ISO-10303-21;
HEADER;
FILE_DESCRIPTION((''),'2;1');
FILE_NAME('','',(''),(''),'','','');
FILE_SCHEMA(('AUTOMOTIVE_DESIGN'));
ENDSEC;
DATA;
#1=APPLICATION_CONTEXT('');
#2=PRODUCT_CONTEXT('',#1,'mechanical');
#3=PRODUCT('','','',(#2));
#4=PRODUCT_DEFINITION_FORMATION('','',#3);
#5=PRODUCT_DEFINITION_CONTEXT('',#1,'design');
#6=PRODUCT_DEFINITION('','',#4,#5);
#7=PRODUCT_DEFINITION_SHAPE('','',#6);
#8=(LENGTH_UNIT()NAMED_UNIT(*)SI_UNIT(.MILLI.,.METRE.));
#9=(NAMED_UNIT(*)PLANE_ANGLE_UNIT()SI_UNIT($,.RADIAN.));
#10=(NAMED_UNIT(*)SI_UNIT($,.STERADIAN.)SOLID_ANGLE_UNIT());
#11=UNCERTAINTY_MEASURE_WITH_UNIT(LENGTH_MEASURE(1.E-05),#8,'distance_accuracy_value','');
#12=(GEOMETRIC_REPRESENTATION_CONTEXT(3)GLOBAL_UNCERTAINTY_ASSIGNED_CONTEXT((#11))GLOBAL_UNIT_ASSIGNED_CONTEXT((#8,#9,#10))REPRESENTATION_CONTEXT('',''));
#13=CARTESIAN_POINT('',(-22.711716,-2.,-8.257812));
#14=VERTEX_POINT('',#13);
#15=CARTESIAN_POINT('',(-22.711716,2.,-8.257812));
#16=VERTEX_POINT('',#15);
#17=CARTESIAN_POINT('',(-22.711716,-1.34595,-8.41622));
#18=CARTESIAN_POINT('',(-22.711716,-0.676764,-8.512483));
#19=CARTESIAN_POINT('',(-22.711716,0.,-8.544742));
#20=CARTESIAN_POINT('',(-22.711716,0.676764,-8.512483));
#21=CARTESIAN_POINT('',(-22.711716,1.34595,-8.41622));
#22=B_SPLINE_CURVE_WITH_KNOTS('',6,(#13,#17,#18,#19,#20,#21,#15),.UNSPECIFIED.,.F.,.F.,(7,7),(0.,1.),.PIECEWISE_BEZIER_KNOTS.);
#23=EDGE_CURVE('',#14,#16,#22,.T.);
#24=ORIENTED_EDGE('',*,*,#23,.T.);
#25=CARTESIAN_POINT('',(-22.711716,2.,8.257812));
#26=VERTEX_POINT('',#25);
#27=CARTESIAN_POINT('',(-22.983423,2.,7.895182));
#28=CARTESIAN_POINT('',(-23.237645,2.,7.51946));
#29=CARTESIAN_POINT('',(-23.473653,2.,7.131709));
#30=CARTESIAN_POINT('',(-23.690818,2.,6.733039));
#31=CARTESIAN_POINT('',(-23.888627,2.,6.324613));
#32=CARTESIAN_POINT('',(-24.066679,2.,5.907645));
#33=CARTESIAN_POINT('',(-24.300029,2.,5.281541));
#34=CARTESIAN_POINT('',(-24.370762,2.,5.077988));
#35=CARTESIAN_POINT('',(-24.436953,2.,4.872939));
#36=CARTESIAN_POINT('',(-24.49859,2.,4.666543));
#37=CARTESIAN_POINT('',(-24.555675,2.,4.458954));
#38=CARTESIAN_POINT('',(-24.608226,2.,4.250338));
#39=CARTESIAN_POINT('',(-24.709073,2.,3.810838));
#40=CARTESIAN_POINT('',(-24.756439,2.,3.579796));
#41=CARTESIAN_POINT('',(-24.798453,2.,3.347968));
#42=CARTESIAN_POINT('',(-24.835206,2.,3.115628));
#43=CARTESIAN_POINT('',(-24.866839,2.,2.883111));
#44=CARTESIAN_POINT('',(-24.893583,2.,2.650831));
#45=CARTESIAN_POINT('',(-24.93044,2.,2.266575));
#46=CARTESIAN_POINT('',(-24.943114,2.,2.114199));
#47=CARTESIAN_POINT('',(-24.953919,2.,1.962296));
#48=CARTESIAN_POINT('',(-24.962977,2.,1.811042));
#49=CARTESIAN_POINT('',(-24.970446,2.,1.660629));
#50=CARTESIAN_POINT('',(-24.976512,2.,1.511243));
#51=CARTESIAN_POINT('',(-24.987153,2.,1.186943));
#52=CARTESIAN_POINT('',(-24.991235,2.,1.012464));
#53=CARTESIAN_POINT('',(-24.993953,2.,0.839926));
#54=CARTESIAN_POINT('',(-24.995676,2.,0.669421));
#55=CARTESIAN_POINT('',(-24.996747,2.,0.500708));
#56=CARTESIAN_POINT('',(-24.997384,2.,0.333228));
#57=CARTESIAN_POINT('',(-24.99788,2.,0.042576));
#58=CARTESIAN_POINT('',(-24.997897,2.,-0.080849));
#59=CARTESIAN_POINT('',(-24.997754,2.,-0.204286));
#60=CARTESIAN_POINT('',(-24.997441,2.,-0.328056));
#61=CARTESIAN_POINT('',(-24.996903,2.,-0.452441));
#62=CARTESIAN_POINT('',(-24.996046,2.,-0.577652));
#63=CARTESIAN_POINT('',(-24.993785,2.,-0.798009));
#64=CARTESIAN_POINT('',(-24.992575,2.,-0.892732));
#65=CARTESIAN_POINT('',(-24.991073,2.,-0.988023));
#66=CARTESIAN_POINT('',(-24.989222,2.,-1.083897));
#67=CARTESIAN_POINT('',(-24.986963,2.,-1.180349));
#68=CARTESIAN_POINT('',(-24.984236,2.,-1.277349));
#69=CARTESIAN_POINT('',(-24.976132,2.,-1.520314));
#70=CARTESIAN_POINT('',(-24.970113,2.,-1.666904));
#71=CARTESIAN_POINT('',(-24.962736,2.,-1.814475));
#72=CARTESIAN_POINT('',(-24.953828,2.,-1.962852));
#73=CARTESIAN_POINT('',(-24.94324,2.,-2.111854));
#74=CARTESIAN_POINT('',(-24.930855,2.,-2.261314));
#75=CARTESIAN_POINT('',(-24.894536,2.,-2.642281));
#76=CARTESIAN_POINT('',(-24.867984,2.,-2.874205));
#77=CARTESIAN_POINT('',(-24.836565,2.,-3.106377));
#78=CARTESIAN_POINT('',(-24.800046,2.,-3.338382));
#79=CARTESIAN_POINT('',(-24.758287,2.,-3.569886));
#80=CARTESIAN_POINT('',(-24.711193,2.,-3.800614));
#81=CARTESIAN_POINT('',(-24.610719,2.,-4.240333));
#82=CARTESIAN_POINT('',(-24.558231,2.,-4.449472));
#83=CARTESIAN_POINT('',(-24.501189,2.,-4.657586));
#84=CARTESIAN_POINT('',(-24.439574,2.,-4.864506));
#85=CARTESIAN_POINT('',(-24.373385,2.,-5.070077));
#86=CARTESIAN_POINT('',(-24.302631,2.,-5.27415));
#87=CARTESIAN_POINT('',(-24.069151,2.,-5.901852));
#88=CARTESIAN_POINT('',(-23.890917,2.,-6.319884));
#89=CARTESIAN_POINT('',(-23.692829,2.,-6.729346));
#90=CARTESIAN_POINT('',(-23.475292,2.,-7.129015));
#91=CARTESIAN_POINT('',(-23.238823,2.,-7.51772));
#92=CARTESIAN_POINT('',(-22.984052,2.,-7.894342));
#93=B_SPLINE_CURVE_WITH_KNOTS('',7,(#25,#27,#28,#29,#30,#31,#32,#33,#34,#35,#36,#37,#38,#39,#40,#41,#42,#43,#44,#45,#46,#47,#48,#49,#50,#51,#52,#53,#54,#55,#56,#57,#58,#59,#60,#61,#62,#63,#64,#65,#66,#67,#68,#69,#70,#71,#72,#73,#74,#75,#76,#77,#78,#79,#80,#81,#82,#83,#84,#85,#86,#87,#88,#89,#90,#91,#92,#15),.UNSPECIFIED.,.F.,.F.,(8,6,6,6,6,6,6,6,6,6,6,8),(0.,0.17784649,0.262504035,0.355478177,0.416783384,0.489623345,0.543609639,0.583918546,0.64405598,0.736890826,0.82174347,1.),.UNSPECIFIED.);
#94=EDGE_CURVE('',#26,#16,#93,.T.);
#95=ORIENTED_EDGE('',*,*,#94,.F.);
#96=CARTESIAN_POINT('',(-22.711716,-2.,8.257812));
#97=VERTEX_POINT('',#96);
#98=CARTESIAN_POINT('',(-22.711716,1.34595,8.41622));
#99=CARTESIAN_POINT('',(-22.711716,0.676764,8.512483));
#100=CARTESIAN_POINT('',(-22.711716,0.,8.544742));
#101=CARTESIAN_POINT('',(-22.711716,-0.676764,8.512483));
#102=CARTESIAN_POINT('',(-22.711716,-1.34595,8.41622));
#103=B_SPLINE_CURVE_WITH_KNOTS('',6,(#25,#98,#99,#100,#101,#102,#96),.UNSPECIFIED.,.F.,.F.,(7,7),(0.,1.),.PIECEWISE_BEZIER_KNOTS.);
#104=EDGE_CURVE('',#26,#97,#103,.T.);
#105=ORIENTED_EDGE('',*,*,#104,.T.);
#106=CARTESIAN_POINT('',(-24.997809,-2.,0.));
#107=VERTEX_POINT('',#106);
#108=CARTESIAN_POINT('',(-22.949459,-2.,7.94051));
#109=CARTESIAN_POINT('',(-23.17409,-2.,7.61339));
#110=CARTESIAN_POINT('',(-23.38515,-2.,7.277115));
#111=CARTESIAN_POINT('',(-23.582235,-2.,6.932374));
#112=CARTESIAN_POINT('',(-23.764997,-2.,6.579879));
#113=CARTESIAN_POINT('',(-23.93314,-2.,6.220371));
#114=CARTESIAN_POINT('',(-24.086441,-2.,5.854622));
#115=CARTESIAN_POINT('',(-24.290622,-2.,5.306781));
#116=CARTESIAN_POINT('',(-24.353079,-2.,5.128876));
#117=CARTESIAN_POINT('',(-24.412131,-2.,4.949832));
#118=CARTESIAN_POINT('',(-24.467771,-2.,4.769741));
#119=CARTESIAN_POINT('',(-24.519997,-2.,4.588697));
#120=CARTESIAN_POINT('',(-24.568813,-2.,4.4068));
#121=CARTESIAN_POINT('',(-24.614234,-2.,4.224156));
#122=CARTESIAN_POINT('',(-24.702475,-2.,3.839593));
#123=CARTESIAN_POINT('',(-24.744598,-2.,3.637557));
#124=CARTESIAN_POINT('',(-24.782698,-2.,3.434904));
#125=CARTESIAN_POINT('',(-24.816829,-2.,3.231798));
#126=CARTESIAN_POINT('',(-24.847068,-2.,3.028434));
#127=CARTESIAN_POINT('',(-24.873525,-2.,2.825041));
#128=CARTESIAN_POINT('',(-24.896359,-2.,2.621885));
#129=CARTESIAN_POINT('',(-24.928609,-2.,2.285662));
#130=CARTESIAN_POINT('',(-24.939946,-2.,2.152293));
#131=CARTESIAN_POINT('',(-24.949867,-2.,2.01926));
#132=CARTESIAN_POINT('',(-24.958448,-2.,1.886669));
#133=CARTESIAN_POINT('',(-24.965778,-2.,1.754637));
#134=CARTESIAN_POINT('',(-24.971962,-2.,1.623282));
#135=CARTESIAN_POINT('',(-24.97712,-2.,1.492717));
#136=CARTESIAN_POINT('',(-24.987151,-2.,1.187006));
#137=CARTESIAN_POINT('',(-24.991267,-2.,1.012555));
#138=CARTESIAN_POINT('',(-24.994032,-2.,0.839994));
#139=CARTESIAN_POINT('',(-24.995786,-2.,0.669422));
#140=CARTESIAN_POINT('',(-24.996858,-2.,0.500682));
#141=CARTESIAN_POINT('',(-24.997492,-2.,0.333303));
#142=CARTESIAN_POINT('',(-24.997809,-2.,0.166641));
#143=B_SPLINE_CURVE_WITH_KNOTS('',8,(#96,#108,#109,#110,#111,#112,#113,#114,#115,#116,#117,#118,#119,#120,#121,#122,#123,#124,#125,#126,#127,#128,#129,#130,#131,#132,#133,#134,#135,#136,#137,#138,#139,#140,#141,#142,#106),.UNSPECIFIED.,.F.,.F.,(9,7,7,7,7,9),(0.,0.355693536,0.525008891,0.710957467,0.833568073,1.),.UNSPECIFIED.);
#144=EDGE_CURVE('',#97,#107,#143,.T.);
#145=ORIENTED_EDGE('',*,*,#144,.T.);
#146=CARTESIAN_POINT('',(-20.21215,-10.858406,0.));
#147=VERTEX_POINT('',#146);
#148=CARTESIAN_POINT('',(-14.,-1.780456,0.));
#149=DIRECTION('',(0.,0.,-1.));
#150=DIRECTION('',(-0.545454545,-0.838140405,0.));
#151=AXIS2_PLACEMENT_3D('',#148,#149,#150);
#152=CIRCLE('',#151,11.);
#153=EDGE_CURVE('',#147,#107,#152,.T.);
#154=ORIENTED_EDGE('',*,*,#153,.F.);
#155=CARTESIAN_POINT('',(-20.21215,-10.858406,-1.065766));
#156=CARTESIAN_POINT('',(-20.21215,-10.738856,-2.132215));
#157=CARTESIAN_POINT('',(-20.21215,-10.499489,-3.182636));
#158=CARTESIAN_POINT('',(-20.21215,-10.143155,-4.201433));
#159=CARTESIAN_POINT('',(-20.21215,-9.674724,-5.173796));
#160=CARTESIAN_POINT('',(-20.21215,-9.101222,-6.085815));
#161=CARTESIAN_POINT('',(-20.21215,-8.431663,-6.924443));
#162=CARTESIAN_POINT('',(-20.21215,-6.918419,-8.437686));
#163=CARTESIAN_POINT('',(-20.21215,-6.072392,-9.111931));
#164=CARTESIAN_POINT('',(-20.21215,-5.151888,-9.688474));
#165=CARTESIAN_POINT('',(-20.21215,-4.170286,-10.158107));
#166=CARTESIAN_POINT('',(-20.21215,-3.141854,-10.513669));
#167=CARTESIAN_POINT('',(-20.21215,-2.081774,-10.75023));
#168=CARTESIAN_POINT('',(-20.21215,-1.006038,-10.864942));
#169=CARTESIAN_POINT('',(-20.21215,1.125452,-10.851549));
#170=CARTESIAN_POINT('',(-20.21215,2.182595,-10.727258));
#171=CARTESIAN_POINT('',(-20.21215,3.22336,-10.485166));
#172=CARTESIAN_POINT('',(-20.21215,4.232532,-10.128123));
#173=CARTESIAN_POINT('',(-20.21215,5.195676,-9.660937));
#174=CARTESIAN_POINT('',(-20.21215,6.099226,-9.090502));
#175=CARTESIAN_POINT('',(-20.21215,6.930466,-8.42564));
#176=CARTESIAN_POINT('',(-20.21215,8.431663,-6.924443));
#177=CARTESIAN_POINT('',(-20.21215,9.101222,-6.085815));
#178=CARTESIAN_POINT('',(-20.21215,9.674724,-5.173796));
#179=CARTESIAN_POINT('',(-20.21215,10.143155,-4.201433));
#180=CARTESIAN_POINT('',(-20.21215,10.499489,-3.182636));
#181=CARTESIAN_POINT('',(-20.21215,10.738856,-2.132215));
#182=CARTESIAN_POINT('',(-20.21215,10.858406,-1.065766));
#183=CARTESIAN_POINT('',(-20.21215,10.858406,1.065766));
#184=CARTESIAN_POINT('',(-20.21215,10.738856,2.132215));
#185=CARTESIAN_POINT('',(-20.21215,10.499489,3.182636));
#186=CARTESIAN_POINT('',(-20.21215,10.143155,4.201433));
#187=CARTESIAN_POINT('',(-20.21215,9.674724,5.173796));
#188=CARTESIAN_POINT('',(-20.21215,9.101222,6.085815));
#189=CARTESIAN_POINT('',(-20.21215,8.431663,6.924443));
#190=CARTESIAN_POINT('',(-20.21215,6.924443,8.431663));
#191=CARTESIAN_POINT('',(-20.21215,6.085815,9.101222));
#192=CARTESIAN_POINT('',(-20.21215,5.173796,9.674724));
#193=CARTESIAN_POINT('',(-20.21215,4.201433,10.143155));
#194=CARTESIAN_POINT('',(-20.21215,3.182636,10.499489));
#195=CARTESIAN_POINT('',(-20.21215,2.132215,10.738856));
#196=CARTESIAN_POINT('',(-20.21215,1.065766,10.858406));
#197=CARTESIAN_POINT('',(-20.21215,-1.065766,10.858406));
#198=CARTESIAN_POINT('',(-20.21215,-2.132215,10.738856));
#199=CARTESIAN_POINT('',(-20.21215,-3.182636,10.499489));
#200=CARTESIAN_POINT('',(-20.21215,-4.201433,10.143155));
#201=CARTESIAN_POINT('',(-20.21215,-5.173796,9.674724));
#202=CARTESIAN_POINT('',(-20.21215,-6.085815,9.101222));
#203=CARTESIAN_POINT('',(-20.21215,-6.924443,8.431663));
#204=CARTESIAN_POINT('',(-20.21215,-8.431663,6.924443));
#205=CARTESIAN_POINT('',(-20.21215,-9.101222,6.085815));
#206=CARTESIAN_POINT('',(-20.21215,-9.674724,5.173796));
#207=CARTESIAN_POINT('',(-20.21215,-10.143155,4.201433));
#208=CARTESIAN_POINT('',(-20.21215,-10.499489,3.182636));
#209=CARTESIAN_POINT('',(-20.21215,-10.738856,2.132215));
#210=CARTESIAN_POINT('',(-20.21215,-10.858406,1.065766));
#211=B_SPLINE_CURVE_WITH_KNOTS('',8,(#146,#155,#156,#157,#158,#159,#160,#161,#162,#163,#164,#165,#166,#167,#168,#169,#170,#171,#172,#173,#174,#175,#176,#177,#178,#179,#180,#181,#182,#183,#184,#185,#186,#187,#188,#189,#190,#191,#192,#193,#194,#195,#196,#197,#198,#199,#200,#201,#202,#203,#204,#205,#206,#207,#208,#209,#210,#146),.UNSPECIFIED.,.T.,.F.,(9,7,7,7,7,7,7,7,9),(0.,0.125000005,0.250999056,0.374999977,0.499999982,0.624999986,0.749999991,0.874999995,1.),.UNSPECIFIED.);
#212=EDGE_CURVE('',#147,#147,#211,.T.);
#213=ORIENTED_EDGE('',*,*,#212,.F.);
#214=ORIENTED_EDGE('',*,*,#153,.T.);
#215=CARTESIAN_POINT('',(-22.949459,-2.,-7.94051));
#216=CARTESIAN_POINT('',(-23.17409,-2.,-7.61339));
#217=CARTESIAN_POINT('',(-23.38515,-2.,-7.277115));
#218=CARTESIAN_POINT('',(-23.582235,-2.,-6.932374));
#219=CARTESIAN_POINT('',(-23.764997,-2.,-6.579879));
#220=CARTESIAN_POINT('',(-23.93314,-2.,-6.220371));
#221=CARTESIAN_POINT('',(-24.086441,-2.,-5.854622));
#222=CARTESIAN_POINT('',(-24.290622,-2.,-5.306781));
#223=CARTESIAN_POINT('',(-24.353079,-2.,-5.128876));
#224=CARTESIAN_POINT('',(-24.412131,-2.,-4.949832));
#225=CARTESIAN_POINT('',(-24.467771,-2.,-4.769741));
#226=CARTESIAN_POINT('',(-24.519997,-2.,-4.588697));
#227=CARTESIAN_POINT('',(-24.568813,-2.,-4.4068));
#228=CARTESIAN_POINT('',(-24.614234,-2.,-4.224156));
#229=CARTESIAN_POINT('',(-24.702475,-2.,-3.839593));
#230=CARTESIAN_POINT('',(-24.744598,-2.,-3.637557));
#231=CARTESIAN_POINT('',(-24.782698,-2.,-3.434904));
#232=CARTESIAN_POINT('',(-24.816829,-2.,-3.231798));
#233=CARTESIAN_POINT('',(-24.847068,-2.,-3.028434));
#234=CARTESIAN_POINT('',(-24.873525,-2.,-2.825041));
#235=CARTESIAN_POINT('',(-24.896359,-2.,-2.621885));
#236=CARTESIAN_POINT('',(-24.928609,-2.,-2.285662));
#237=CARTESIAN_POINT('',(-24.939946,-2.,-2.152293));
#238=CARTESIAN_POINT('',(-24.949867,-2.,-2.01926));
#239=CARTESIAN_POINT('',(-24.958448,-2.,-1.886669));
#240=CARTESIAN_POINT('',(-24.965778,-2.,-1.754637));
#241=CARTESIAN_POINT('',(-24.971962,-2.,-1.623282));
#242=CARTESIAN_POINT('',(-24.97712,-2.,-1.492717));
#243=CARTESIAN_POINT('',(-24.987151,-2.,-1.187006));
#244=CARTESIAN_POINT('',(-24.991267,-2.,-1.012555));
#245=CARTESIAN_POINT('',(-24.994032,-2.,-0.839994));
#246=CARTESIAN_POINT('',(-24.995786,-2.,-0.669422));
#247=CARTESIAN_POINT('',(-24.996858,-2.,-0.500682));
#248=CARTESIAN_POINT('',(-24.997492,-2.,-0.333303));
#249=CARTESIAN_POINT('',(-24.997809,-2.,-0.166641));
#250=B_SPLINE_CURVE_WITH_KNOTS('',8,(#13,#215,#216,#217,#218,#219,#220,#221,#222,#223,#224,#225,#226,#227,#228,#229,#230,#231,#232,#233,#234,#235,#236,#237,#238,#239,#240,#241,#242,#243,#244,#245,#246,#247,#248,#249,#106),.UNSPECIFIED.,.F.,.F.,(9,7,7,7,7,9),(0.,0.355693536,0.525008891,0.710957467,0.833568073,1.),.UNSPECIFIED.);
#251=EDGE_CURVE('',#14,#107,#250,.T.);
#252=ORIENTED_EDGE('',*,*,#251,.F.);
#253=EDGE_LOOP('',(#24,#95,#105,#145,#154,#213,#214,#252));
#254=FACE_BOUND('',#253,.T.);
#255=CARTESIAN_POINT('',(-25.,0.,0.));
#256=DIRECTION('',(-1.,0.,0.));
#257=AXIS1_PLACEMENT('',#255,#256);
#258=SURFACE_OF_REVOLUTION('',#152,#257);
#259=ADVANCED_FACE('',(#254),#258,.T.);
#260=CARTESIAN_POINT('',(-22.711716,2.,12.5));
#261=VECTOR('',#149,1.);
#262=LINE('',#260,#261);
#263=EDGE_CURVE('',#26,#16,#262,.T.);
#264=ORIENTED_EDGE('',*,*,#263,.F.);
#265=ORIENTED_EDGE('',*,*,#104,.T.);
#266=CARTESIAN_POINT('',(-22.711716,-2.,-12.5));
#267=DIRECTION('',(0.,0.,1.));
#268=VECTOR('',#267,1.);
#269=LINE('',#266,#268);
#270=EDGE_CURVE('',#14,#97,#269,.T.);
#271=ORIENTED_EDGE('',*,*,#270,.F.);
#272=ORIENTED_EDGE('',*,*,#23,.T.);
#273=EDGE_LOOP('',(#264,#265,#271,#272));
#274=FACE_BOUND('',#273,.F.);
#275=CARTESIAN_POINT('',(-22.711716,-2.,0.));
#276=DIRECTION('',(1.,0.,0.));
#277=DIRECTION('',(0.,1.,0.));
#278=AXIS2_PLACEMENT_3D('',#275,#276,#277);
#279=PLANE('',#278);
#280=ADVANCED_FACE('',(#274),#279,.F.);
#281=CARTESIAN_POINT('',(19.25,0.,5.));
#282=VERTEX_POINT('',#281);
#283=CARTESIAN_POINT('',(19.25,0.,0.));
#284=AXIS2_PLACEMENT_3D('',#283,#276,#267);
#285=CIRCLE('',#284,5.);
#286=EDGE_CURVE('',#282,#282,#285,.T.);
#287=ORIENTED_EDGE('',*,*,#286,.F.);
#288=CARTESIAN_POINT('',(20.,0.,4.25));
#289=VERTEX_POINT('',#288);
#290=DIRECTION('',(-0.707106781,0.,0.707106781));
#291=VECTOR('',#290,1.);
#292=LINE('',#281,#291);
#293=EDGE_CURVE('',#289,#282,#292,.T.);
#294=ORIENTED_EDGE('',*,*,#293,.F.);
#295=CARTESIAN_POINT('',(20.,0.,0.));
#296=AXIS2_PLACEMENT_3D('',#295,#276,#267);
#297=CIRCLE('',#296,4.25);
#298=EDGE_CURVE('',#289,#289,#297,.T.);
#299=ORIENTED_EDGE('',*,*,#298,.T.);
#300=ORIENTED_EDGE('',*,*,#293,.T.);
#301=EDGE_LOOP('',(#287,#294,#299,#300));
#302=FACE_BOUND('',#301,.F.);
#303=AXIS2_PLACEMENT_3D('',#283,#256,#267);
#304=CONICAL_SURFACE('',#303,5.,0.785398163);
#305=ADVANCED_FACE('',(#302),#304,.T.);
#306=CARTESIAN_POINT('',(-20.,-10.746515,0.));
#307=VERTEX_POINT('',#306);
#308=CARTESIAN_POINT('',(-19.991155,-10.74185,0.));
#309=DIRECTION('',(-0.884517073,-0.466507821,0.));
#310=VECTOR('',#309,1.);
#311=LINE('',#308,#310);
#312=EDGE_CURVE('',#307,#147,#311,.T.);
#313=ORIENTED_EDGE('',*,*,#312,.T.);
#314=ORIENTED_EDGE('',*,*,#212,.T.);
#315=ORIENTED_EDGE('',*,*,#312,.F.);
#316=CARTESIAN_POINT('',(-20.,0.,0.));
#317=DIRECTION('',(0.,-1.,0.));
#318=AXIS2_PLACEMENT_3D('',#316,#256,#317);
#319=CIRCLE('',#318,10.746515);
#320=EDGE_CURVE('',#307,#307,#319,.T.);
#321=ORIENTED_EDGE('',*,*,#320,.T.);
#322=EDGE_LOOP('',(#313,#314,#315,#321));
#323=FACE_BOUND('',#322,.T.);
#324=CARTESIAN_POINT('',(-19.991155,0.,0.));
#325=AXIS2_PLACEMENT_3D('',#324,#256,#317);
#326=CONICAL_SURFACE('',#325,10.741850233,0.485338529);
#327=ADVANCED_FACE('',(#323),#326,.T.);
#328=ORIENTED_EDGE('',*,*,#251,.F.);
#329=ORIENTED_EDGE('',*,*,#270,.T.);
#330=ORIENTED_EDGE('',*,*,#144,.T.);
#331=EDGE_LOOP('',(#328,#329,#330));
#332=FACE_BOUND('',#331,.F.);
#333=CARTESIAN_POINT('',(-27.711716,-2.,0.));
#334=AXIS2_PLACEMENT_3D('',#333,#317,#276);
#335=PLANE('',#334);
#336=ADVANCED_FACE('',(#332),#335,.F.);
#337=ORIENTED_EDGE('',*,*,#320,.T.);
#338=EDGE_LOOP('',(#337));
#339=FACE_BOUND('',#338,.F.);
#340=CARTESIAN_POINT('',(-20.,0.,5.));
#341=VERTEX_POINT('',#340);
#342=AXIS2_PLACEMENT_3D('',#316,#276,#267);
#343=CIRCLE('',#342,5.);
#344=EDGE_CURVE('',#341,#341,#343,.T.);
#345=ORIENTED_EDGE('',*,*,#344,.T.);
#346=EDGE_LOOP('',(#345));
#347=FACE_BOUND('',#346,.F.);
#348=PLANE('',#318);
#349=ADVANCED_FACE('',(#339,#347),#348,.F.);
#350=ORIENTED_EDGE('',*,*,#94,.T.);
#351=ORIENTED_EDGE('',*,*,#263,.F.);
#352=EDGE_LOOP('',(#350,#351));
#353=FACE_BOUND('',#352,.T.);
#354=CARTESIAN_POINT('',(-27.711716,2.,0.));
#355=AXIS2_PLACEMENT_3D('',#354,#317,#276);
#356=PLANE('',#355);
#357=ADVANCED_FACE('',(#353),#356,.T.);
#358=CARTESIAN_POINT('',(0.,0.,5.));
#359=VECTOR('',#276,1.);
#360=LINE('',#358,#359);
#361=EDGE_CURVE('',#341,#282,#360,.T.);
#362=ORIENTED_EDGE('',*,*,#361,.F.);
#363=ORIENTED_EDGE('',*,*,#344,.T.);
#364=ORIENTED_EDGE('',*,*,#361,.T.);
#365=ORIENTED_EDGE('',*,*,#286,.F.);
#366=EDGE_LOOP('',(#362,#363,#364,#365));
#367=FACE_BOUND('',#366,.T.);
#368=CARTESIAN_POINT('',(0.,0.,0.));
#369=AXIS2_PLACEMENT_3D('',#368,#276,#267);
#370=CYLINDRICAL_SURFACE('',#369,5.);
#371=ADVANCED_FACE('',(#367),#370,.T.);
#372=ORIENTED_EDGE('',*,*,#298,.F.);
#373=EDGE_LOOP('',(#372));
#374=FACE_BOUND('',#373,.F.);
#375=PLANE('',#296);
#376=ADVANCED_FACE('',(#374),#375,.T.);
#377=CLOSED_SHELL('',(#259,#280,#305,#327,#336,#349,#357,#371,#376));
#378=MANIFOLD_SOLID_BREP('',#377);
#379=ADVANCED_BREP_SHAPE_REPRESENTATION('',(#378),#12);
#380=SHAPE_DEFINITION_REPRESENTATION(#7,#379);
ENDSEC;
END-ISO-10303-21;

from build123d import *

# Parameters (mm, degrees)
F0_W     = 40
F0_H     = 5
F2_SIZE  = 0.75
F3_R     = 11
F3_R_2   = 5
F4_DEPTH = 5
F7_W     = 5
F7_H     = 4
F8_DEPTH = 12.5


# Not quite as in the source:
# - a fillet or chamfer that OpenCascade refuses, or shapes differently, is made with other operations: its cross-section is extruded or revolved along the edge and cut away or added


with BuildPart() as f1:
    # F0 (on Front) → F1 (revolve)
    with BuildSketch(Plane.XZ):
        with Locations((0, 2.5)):
            Rectangle(F0_W, F0_H)
    revolve(axis=Axis((0, 0, 0), (1, 0, 0)))

    # F2
    f2_edges = [f1.edges().sort_by_distance(p)[0] for p in [
        (20, 0, -5),
    ]]
    chamfer(f2_edges, length=F2_SIZE)

    # F3 (on face) → F4 (join)
    with BuildSketch(Plane(origin=(-20, 0, 0), x_dir=(0, -1, 0), z_dir=(-1, 0, 0))):
        Circle(F3_R)
        Circle(F3_R_2, mode=Mode.SUBTRACT)
        Circle(F3_R_2)
    extrude(amount=F4_DEPTH)

    # F5: fillet of radius 11 on 1 edges, made by hand

    # F5_s1 → F5_t2 (revolve, cut)
    with BuildSketch(Plane.XY):
        with BuildLine():
            ThreePointArc((-20, -11), (-23.6695398029, -7.0244997836), (-25, -1.7804555427))
            Line((-25, -1.7804555427), (-25, -11))
            Line((-25, -11), (-20, -11))
        make_face()
    revolve(axis=Axis((-25, 0, 0), (-1, 0, 0)), mode=Mode.SUBTRACT)

    # F6: chamfer of 0.25 on 1 edges, made by hand

    # F6_s1 → F6_t2 (revolve, cut)
    with BuildSketch(Plane.XY):
        with BuildLine():
            Line((-19.9911548293, -10.7418502329), (-20.2209951465, -10.8630715284))
            Line((-20.2209951465, -10.8630715284), (-20.2238188511, -10.8671978697))
            ThreePointArc((-20.2238188511, -10.8671978697), (-20.1112438047, -10.9326533203), (-20.0027272727, -11.004190702))
            Line((-20.0027272727, -11.004190702), (-19.995, -11))
            ThreePointArc((-19.995, -11), (-19.995, -10.8709251165), (-19.9861548293, -10.7418502329))
            Line((-19.9861548293, -10.7418502329), (-19.9911548293, -10.7418502329))
        make_face()
    revolve(axis=Axis((-20, 0, 0), (-1, 0, 0)), mode=Mode.SUBTRACT)

    # F7 (on Top) → F8 (cut, symmetric)
    with BuildSketch(Plane.XY):
        with Locations((-25.2117160708, 0)):
            Rectangle(F7_W, F7_H)
    extrude(amount=F8_DEPTH, both=True, mode=Mode.SUBTRACT)


solid = f1.part
